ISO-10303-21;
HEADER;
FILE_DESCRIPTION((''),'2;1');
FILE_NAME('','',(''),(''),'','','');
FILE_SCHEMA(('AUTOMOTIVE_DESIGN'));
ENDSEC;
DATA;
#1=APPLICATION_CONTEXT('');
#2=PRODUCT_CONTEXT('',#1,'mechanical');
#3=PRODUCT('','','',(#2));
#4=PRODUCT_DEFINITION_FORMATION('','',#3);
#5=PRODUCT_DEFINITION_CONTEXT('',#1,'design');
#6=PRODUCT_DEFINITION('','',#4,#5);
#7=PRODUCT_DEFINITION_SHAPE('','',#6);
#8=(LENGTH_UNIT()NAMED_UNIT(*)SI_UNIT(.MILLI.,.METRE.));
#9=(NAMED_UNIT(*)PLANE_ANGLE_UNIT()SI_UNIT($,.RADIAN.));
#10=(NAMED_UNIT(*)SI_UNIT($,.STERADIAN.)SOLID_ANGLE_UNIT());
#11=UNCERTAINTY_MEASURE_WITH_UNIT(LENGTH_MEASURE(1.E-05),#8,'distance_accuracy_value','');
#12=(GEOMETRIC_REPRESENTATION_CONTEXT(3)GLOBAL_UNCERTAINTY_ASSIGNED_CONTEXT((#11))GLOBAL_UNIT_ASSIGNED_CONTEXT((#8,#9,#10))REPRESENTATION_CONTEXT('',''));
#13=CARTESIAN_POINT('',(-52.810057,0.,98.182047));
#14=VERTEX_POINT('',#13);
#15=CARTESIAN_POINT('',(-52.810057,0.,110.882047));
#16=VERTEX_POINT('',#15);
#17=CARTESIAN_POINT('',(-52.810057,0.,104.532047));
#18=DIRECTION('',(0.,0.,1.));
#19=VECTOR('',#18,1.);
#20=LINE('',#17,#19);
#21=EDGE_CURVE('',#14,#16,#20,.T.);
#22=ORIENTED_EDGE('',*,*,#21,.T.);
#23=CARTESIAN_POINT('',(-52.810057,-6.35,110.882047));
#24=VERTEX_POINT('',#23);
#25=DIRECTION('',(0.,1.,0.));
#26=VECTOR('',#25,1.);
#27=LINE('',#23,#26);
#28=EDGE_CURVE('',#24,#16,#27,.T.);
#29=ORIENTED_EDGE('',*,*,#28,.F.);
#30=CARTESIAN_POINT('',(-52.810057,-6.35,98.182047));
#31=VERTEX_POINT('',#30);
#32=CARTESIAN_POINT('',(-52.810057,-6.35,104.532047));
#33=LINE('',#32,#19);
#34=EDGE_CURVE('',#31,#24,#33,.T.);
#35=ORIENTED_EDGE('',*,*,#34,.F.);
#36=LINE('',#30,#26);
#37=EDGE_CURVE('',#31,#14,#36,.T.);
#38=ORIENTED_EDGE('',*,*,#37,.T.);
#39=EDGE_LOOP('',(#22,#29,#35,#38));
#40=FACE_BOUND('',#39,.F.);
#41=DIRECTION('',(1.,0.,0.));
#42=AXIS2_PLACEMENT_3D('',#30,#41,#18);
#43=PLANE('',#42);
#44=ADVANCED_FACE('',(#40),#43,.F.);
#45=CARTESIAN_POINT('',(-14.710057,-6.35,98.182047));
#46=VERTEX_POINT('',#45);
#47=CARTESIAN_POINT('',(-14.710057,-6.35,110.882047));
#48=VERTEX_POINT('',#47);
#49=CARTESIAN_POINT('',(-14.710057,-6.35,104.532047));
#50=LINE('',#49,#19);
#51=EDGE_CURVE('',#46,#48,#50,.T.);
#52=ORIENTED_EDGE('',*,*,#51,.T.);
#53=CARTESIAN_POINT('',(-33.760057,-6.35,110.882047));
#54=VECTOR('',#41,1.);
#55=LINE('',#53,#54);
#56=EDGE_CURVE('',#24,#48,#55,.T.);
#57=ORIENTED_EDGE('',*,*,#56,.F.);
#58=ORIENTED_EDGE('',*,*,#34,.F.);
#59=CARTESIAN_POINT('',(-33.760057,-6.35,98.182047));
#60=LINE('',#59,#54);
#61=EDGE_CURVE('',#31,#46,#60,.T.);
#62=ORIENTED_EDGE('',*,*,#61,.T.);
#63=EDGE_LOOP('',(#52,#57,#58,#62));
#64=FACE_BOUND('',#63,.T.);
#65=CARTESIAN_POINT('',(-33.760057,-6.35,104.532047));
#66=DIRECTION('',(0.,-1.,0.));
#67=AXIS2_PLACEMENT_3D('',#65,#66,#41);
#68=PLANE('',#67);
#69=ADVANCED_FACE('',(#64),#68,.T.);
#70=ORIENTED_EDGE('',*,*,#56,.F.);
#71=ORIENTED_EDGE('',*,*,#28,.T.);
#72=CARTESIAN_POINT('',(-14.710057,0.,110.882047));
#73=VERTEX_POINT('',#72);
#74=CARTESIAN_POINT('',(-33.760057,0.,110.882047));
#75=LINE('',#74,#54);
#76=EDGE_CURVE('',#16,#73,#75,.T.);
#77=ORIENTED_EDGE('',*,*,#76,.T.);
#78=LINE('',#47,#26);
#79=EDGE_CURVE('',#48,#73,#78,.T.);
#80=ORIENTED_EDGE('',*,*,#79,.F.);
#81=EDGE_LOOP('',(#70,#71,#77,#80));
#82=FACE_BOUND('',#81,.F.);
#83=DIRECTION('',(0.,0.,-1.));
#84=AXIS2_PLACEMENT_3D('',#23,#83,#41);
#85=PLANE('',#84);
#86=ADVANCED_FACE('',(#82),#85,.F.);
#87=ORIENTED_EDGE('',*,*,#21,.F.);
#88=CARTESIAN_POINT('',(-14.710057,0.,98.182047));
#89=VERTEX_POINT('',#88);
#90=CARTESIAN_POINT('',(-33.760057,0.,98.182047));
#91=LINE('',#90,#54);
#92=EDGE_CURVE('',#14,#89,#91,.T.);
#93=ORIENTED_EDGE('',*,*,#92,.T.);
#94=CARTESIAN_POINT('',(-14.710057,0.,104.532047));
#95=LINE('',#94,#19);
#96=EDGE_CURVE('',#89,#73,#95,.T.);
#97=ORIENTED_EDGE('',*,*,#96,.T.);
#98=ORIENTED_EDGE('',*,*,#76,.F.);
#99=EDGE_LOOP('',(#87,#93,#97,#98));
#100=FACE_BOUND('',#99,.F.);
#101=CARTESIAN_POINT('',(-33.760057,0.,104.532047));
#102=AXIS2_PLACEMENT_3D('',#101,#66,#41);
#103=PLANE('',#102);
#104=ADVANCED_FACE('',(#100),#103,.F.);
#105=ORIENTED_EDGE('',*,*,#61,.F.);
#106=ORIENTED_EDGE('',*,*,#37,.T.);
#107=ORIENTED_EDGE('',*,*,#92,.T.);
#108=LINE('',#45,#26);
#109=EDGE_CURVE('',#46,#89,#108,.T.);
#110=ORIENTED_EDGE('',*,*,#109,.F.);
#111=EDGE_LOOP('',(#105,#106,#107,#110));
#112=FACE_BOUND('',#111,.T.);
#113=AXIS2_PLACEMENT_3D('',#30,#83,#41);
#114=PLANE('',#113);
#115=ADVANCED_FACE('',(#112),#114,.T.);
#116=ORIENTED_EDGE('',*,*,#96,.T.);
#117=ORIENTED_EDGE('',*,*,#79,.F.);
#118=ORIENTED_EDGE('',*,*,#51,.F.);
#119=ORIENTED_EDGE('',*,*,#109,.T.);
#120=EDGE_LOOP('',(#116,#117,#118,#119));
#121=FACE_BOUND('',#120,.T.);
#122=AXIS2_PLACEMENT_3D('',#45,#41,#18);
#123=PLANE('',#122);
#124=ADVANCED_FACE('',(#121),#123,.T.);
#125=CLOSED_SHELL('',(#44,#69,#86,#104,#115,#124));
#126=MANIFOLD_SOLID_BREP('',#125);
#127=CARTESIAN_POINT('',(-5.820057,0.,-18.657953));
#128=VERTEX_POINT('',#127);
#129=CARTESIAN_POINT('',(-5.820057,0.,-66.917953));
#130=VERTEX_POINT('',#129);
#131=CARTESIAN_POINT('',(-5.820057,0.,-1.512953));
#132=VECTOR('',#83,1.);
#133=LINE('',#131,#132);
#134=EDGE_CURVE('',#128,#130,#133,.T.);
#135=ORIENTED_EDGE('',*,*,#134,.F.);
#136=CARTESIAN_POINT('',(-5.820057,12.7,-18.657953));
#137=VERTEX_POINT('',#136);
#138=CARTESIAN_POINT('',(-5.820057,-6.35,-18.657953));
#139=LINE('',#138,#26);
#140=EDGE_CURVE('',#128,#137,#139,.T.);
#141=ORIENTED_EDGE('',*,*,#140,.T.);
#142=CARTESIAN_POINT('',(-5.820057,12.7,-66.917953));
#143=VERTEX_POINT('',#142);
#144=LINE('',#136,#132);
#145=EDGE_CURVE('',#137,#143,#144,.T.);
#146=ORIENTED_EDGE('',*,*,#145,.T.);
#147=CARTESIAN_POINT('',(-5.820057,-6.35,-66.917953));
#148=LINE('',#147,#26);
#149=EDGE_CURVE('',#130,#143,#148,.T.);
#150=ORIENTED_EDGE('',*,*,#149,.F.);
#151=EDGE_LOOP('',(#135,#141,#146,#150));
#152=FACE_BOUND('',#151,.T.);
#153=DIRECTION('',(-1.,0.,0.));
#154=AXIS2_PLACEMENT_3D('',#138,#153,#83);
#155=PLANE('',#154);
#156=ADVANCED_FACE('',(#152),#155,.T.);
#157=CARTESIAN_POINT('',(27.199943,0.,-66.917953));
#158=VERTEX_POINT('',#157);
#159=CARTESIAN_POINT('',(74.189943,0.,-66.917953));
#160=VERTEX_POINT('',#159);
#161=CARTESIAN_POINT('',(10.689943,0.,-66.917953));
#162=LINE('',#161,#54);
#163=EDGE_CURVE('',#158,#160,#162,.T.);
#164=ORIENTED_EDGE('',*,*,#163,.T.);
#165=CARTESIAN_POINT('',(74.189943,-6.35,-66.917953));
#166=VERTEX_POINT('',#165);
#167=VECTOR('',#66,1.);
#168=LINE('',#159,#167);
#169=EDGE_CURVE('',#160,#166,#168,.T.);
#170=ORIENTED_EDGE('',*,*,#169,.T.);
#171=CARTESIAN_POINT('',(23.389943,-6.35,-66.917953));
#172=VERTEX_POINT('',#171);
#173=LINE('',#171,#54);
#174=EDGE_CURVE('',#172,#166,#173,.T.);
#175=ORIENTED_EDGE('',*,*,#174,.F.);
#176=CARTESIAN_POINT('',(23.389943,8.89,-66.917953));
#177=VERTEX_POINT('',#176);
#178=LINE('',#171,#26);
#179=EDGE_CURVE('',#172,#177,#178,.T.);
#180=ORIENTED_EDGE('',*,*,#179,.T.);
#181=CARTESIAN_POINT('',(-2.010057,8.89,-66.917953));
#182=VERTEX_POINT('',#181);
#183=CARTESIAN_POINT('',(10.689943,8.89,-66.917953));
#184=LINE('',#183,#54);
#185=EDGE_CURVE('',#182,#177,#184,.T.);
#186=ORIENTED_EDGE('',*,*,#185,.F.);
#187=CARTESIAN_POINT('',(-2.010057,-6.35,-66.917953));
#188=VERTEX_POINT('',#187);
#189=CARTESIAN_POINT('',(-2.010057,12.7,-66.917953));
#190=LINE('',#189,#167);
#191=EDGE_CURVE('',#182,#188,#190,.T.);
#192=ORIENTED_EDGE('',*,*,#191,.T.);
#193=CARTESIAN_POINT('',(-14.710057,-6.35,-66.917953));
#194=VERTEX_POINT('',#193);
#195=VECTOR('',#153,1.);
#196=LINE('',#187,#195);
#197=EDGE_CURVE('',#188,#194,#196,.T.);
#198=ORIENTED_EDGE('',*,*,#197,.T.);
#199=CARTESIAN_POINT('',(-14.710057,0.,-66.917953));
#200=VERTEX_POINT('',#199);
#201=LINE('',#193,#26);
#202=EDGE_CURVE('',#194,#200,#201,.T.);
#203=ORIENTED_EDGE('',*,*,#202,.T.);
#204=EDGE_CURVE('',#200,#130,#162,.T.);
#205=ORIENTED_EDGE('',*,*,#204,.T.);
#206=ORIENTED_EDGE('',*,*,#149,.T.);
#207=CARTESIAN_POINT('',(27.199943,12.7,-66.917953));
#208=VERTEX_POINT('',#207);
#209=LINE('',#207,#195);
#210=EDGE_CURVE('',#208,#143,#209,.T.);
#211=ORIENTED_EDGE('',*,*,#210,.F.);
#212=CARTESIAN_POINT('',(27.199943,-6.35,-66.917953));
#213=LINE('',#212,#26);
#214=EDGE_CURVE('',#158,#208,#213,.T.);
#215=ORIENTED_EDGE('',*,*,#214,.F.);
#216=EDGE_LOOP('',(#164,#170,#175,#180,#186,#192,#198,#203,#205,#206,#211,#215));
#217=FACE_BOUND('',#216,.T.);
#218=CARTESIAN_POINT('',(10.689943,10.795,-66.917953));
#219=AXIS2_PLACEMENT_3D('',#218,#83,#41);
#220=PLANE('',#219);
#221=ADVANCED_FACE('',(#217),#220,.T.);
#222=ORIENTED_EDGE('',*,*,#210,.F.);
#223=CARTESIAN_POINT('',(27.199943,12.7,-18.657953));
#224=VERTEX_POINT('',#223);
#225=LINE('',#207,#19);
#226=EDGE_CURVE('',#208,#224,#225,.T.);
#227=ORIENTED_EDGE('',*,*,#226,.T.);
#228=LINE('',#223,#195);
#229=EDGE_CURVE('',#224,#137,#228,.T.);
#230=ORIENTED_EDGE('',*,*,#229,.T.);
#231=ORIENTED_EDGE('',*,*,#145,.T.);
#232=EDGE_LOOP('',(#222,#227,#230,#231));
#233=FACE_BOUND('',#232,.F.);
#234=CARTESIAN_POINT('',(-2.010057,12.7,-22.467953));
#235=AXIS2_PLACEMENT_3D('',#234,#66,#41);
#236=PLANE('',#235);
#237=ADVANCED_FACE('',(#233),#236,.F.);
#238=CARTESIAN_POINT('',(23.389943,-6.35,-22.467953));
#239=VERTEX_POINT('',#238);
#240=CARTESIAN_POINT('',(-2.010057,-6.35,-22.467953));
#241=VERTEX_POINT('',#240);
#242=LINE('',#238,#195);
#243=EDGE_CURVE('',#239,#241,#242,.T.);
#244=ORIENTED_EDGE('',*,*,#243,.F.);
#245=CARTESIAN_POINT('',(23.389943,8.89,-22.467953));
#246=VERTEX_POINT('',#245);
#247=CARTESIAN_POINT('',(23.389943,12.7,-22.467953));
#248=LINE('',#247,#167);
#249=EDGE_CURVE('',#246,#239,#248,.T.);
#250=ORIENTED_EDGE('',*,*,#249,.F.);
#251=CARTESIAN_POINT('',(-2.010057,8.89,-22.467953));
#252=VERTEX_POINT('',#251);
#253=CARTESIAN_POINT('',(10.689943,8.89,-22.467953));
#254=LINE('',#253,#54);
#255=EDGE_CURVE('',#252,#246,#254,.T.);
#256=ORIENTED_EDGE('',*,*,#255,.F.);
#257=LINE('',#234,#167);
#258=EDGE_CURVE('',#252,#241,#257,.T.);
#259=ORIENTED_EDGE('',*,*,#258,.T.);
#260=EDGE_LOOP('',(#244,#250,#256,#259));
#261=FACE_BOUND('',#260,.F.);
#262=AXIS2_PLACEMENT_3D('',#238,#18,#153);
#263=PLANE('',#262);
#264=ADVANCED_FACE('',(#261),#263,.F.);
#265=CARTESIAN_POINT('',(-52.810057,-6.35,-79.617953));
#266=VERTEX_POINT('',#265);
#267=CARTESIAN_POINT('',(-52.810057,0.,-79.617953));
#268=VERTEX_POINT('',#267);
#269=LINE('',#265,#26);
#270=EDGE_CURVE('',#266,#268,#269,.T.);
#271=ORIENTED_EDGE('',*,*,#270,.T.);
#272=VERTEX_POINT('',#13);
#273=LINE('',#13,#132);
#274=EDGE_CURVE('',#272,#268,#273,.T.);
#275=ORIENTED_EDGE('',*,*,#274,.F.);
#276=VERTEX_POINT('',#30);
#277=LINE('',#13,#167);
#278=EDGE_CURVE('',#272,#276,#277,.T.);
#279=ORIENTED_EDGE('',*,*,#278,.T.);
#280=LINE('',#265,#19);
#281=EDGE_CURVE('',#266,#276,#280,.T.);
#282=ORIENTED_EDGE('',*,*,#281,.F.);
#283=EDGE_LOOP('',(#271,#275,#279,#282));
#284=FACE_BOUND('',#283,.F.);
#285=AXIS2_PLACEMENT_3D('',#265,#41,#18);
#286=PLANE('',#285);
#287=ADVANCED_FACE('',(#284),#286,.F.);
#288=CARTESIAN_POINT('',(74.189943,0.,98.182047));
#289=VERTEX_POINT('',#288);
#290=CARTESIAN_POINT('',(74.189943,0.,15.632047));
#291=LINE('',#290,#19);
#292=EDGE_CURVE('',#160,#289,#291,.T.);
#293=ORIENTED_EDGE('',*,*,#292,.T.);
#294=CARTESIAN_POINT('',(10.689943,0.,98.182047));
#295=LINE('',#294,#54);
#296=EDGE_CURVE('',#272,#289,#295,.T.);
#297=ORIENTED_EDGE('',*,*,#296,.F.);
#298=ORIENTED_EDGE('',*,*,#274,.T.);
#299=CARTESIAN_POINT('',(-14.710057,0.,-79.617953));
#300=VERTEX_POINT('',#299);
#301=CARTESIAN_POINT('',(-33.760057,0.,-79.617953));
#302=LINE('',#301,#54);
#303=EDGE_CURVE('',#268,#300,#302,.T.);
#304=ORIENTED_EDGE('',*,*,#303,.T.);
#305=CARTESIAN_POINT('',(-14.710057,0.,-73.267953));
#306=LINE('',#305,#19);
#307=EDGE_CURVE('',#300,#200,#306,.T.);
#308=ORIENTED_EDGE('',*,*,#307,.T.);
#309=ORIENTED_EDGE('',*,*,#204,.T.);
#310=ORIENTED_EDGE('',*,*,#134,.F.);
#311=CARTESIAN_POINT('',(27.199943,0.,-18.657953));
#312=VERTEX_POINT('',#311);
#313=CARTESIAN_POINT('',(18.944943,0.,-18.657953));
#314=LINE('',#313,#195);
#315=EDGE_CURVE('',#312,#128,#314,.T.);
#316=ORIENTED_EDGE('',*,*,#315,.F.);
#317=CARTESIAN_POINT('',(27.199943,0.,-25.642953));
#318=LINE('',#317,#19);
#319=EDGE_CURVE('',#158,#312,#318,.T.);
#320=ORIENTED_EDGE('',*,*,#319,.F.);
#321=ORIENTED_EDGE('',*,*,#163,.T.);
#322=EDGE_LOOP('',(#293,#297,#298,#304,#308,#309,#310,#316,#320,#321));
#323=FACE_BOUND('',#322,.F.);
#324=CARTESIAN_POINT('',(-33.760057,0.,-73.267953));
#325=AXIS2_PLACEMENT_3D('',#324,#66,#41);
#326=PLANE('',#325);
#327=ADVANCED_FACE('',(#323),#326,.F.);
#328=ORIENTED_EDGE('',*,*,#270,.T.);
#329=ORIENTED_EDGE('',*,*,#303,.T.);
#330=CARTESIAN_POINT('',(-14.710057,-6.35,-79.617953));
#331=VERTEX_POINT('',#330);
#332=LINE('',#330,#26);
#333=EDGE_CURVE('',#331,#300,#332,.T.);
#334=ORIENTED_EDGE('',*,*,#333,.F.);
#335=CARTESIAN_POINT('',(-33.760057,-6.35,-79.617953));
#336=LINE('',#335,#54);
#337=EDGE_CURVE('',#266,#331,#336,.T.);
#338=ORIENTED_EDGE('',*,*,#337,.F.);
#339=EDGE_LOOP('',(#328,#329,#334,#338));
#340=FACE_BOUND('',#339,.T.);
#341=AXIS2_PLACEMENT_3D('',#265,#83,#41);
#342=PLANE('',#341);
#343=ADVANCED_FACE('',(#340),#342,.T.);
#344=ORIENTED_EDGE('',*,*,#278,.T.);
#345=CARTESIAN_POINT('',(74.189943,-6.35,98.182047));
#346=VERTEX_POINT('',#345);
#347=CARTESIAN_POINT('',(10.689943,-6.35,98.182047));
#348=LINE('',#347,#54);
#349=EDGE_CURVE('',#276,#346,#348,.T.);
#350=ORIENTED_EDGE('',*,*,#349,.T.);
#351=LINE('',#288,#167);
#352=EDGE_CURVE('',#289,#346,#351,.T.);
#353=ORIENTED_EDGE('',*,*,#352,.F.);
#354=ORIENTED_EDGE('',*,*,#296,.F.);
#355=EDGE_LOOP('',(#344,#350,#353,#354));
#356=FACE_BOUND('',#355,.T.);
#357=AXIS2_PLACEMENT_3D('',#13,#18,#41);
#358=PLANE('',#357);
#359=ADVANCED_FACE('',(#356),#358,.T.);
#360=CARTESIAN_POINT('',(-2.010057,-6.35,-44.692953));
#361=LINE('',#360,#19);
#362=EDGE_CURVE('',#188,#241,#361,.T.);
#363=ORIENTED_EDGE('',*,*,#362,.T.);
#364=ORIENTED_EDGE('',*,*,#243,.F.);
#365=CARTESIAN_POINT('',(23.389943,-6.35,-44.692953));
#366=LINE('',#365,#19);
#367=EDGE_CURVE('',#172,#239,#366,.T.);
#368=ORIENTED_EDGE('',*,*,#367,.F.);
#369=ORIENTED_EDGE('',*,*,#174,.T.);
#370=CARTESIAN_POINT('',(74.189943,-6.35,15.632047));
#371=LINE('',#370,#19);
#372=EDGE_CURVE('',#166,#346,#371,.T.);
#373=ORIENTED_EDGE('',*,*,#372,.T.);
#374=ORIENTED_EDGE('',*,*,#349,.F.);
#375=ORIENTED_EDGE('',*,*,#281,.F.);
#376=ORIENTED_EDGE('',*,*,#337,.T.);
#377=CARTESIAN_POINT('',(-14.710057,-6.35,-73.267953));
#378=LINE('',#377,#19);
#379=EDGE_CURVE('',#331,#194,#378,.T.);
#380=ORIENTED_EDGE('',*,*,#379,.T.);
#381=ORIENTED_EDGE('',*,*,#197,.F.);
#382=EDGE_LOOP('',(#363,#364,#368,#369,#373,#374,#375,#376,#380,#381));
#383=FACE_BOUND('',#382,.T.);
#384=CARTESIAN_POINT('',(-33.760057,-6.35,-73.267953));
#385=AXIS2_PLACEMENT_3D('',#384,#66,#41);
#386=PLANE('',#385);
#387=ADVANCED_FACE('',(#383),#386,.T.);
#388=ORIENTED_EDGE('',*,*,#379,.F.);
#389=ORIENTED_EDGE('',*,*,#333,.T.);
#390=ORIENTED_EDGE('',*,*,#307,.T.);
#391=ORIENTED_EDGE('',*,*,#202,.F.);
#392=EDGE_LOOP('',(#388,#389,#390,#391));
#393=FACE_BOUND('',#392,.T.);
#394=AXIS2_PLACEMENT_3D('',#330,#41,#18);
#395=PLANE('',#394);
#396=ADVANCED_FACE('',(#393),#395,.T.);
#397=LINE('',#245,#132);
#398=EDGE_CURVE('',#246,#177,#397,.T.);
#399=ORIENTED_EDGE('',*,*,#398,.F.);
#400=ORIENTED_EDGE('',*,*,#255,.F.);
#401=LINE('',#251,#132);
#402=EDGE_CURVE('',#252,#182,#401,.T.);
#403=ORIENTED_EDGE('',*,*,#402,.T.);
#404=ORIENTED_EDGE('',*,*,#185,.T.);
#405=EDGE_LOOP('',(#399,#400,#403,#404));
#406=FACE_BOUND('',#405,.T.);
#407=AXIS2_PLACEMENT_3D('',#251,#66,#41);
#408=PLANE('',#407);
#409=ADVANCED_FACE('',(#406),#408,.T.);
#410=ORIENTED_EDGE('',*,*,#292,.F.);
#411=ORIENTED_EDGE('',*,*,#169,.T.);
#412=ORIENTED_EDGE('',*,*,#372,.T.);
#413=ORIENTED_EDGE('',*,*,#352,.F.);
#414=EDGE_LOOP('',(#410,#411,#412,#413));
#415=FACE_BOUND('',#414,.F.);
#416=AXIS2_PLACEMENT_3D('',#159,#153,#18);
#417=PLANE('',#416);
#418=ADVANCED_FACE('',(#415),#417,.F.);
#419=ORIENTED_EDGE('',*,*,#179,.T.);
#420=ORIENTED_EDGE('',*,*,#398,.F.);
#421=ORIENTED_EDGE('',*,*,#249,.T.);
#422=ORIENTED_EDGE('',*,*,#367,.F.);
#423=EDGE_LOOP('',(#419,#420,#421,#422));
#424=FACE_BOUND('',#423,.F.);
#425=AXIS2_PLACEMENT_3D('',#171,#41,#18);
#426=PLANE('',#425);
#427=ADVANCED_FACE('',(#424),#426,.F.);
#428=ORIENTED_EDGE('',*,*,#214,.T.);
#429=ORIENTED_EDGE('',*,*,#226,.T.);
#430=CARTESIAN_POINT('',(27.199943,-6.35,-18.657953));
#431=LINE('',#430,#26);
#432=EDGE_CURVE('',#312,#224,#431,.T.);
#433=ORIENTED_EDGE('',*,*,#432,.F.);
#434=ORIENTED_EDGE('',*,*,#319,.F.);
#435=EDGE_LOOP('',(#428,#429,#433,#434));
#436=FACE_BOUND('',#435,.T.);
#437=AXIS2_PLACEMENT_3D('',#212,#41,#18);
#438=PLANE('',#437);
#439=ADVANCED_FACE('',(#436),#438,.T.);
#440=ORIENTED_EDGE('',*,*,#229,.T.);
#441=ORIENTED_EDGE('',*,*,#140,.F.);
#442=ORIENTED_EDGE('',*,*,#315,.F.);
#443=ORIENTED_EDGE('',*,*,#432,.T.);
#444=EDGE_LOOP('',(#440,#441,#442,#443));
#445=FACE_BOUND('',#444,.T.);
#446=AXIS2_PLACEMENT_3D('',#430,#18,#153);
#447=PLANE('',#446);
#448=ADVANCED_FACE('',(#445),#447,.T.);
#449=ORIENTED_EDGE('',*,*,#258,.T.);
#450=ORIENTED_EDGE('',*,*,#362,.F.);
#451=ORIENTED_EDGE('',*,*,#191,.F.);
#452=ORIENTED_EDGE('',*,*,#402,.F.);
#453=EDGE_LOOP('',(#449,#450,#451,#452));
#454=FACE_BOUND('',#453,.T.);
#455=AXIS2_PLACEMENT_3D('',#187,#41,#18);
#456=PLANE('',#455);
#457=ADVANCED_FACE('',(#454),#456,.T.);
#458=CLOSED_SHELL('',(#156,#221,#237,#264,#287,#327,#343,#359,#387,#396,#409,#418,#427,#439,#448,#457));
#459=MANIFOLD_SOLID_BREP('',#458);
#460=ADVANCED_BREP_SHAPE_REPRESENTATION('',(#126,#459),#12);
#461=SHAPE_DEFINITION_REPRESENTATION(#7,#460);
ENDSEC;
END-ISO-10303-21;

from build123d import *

# Parameters (mm, degrees)
F0_W      = 127
F0_H      = 165.1
F1_DEPTH  = 6.35
F2_W      = 12.7
F2_H      = 44.45
F3_DEPTH  = 25.4
F4_DEPTH  = 19.05
F5_W      = 25.4
F5_H      = 3.81
F6_DEPTH  = 44.45
F7_W      = 38.1
F7_H      = 12.7
F8_DEPTH  = 6.35
F9_W      = 38.1
F9_H      = 8.89
F10_DEPTH = 2.54
F11_W     = 38.1
F11_H     = 12.7
F12_DEPTH = 6.35


# Not quite as in the source:
# - a length typed as a fraction of an inch, garbled in the dataset ("3 / 203.2 mm" for 3/8 in), is restored


with BuildPart() as f1:
    # F0 (on Front) → F1 (new body)
    with BuildSketch(Plane.XZ):
        with Locations((10.689943251, 15.6320472565)):
            Rectangle(F0_W, F0_H)
    extrude(amount=F1_DEPTH)

    # F2 (on face) → F3 (cut)
    with BuildSketch(Plane.XZ.offset(6.35)):
        with Locations((4.339943251, -44.6929527435)):
            Rectangle(F2_W, F2_H)
        with Locations((17.039943251, -44.6929527435)):
            Rectangle(F2_W, F2_H)
    extrude(amount=-F3_DEPTH, mode=Mode.SUBTRACT)

    # F2 (on face) → F4 (join)
    with BuildSketch(Plane.XZ.offset(6.35)):
        Polygon((10.689943251, -22.4679527435), (10.689943251, -18.6579527435), (-5.820056749, -18.6579527435), (-5.820056749, -66.9179527435), (-2.010056749, -66.9179527435), (-2.010056749, -22.4679527435), align=None)
        Polygon((27.199943251, -18.6579527435), (10.689943251, -18.6579527435), (10.689943251, -22.4679527435), (23.389943251, -22.4679527435), (23.389943251, -66.9179527435), (27.199943251, -66.9179527435), align=None)
    extrude(amount=-F4_DEPTH)

    # F5 (on face) → F6 (join)
    with BuildSketch(Plane(origin=(0, 0, -22.4679527435), x_dir=(1, 0, 0), z_dir=(0, 0, -1))):
        with Locations((10.689943251, -10.795)):
            Rectangle(F5_W, F5_H)
    extrude(amount=F6_DEPTH)

    # F11 (on face) → F12 (join)
    with BuildSketch(Plane.XZ.offset(6.35)):
        with Locations((-33.760056749, -73.2679527435)):
            Rectangle(F11_W, F11_H)
    extrude(amount=-F12_DEPTH)


with BuildPart() as f8:
    # F7 (on face) → F8 (new body)
    with BuildSketch(Plane.XZ.offset(6.35)):
        with Locations((-33.760056749, 104.5320472565)):
            Rectangle(F7_W, F7_H)
    extrude(amount=-F8_DEPTH)


with BuildPart() as f10:
    # F9 (on face) → F10 (new body)
    with BuildSketch(Plane.XZ.offset(6.35)):
        with Locations((-33.760056749, 110.6541514468)):
            Rectangle(F9_W, F9_H)
    extrude(amount=F10_DEPTH)


solid = Compound([f1.part, f8.part])
